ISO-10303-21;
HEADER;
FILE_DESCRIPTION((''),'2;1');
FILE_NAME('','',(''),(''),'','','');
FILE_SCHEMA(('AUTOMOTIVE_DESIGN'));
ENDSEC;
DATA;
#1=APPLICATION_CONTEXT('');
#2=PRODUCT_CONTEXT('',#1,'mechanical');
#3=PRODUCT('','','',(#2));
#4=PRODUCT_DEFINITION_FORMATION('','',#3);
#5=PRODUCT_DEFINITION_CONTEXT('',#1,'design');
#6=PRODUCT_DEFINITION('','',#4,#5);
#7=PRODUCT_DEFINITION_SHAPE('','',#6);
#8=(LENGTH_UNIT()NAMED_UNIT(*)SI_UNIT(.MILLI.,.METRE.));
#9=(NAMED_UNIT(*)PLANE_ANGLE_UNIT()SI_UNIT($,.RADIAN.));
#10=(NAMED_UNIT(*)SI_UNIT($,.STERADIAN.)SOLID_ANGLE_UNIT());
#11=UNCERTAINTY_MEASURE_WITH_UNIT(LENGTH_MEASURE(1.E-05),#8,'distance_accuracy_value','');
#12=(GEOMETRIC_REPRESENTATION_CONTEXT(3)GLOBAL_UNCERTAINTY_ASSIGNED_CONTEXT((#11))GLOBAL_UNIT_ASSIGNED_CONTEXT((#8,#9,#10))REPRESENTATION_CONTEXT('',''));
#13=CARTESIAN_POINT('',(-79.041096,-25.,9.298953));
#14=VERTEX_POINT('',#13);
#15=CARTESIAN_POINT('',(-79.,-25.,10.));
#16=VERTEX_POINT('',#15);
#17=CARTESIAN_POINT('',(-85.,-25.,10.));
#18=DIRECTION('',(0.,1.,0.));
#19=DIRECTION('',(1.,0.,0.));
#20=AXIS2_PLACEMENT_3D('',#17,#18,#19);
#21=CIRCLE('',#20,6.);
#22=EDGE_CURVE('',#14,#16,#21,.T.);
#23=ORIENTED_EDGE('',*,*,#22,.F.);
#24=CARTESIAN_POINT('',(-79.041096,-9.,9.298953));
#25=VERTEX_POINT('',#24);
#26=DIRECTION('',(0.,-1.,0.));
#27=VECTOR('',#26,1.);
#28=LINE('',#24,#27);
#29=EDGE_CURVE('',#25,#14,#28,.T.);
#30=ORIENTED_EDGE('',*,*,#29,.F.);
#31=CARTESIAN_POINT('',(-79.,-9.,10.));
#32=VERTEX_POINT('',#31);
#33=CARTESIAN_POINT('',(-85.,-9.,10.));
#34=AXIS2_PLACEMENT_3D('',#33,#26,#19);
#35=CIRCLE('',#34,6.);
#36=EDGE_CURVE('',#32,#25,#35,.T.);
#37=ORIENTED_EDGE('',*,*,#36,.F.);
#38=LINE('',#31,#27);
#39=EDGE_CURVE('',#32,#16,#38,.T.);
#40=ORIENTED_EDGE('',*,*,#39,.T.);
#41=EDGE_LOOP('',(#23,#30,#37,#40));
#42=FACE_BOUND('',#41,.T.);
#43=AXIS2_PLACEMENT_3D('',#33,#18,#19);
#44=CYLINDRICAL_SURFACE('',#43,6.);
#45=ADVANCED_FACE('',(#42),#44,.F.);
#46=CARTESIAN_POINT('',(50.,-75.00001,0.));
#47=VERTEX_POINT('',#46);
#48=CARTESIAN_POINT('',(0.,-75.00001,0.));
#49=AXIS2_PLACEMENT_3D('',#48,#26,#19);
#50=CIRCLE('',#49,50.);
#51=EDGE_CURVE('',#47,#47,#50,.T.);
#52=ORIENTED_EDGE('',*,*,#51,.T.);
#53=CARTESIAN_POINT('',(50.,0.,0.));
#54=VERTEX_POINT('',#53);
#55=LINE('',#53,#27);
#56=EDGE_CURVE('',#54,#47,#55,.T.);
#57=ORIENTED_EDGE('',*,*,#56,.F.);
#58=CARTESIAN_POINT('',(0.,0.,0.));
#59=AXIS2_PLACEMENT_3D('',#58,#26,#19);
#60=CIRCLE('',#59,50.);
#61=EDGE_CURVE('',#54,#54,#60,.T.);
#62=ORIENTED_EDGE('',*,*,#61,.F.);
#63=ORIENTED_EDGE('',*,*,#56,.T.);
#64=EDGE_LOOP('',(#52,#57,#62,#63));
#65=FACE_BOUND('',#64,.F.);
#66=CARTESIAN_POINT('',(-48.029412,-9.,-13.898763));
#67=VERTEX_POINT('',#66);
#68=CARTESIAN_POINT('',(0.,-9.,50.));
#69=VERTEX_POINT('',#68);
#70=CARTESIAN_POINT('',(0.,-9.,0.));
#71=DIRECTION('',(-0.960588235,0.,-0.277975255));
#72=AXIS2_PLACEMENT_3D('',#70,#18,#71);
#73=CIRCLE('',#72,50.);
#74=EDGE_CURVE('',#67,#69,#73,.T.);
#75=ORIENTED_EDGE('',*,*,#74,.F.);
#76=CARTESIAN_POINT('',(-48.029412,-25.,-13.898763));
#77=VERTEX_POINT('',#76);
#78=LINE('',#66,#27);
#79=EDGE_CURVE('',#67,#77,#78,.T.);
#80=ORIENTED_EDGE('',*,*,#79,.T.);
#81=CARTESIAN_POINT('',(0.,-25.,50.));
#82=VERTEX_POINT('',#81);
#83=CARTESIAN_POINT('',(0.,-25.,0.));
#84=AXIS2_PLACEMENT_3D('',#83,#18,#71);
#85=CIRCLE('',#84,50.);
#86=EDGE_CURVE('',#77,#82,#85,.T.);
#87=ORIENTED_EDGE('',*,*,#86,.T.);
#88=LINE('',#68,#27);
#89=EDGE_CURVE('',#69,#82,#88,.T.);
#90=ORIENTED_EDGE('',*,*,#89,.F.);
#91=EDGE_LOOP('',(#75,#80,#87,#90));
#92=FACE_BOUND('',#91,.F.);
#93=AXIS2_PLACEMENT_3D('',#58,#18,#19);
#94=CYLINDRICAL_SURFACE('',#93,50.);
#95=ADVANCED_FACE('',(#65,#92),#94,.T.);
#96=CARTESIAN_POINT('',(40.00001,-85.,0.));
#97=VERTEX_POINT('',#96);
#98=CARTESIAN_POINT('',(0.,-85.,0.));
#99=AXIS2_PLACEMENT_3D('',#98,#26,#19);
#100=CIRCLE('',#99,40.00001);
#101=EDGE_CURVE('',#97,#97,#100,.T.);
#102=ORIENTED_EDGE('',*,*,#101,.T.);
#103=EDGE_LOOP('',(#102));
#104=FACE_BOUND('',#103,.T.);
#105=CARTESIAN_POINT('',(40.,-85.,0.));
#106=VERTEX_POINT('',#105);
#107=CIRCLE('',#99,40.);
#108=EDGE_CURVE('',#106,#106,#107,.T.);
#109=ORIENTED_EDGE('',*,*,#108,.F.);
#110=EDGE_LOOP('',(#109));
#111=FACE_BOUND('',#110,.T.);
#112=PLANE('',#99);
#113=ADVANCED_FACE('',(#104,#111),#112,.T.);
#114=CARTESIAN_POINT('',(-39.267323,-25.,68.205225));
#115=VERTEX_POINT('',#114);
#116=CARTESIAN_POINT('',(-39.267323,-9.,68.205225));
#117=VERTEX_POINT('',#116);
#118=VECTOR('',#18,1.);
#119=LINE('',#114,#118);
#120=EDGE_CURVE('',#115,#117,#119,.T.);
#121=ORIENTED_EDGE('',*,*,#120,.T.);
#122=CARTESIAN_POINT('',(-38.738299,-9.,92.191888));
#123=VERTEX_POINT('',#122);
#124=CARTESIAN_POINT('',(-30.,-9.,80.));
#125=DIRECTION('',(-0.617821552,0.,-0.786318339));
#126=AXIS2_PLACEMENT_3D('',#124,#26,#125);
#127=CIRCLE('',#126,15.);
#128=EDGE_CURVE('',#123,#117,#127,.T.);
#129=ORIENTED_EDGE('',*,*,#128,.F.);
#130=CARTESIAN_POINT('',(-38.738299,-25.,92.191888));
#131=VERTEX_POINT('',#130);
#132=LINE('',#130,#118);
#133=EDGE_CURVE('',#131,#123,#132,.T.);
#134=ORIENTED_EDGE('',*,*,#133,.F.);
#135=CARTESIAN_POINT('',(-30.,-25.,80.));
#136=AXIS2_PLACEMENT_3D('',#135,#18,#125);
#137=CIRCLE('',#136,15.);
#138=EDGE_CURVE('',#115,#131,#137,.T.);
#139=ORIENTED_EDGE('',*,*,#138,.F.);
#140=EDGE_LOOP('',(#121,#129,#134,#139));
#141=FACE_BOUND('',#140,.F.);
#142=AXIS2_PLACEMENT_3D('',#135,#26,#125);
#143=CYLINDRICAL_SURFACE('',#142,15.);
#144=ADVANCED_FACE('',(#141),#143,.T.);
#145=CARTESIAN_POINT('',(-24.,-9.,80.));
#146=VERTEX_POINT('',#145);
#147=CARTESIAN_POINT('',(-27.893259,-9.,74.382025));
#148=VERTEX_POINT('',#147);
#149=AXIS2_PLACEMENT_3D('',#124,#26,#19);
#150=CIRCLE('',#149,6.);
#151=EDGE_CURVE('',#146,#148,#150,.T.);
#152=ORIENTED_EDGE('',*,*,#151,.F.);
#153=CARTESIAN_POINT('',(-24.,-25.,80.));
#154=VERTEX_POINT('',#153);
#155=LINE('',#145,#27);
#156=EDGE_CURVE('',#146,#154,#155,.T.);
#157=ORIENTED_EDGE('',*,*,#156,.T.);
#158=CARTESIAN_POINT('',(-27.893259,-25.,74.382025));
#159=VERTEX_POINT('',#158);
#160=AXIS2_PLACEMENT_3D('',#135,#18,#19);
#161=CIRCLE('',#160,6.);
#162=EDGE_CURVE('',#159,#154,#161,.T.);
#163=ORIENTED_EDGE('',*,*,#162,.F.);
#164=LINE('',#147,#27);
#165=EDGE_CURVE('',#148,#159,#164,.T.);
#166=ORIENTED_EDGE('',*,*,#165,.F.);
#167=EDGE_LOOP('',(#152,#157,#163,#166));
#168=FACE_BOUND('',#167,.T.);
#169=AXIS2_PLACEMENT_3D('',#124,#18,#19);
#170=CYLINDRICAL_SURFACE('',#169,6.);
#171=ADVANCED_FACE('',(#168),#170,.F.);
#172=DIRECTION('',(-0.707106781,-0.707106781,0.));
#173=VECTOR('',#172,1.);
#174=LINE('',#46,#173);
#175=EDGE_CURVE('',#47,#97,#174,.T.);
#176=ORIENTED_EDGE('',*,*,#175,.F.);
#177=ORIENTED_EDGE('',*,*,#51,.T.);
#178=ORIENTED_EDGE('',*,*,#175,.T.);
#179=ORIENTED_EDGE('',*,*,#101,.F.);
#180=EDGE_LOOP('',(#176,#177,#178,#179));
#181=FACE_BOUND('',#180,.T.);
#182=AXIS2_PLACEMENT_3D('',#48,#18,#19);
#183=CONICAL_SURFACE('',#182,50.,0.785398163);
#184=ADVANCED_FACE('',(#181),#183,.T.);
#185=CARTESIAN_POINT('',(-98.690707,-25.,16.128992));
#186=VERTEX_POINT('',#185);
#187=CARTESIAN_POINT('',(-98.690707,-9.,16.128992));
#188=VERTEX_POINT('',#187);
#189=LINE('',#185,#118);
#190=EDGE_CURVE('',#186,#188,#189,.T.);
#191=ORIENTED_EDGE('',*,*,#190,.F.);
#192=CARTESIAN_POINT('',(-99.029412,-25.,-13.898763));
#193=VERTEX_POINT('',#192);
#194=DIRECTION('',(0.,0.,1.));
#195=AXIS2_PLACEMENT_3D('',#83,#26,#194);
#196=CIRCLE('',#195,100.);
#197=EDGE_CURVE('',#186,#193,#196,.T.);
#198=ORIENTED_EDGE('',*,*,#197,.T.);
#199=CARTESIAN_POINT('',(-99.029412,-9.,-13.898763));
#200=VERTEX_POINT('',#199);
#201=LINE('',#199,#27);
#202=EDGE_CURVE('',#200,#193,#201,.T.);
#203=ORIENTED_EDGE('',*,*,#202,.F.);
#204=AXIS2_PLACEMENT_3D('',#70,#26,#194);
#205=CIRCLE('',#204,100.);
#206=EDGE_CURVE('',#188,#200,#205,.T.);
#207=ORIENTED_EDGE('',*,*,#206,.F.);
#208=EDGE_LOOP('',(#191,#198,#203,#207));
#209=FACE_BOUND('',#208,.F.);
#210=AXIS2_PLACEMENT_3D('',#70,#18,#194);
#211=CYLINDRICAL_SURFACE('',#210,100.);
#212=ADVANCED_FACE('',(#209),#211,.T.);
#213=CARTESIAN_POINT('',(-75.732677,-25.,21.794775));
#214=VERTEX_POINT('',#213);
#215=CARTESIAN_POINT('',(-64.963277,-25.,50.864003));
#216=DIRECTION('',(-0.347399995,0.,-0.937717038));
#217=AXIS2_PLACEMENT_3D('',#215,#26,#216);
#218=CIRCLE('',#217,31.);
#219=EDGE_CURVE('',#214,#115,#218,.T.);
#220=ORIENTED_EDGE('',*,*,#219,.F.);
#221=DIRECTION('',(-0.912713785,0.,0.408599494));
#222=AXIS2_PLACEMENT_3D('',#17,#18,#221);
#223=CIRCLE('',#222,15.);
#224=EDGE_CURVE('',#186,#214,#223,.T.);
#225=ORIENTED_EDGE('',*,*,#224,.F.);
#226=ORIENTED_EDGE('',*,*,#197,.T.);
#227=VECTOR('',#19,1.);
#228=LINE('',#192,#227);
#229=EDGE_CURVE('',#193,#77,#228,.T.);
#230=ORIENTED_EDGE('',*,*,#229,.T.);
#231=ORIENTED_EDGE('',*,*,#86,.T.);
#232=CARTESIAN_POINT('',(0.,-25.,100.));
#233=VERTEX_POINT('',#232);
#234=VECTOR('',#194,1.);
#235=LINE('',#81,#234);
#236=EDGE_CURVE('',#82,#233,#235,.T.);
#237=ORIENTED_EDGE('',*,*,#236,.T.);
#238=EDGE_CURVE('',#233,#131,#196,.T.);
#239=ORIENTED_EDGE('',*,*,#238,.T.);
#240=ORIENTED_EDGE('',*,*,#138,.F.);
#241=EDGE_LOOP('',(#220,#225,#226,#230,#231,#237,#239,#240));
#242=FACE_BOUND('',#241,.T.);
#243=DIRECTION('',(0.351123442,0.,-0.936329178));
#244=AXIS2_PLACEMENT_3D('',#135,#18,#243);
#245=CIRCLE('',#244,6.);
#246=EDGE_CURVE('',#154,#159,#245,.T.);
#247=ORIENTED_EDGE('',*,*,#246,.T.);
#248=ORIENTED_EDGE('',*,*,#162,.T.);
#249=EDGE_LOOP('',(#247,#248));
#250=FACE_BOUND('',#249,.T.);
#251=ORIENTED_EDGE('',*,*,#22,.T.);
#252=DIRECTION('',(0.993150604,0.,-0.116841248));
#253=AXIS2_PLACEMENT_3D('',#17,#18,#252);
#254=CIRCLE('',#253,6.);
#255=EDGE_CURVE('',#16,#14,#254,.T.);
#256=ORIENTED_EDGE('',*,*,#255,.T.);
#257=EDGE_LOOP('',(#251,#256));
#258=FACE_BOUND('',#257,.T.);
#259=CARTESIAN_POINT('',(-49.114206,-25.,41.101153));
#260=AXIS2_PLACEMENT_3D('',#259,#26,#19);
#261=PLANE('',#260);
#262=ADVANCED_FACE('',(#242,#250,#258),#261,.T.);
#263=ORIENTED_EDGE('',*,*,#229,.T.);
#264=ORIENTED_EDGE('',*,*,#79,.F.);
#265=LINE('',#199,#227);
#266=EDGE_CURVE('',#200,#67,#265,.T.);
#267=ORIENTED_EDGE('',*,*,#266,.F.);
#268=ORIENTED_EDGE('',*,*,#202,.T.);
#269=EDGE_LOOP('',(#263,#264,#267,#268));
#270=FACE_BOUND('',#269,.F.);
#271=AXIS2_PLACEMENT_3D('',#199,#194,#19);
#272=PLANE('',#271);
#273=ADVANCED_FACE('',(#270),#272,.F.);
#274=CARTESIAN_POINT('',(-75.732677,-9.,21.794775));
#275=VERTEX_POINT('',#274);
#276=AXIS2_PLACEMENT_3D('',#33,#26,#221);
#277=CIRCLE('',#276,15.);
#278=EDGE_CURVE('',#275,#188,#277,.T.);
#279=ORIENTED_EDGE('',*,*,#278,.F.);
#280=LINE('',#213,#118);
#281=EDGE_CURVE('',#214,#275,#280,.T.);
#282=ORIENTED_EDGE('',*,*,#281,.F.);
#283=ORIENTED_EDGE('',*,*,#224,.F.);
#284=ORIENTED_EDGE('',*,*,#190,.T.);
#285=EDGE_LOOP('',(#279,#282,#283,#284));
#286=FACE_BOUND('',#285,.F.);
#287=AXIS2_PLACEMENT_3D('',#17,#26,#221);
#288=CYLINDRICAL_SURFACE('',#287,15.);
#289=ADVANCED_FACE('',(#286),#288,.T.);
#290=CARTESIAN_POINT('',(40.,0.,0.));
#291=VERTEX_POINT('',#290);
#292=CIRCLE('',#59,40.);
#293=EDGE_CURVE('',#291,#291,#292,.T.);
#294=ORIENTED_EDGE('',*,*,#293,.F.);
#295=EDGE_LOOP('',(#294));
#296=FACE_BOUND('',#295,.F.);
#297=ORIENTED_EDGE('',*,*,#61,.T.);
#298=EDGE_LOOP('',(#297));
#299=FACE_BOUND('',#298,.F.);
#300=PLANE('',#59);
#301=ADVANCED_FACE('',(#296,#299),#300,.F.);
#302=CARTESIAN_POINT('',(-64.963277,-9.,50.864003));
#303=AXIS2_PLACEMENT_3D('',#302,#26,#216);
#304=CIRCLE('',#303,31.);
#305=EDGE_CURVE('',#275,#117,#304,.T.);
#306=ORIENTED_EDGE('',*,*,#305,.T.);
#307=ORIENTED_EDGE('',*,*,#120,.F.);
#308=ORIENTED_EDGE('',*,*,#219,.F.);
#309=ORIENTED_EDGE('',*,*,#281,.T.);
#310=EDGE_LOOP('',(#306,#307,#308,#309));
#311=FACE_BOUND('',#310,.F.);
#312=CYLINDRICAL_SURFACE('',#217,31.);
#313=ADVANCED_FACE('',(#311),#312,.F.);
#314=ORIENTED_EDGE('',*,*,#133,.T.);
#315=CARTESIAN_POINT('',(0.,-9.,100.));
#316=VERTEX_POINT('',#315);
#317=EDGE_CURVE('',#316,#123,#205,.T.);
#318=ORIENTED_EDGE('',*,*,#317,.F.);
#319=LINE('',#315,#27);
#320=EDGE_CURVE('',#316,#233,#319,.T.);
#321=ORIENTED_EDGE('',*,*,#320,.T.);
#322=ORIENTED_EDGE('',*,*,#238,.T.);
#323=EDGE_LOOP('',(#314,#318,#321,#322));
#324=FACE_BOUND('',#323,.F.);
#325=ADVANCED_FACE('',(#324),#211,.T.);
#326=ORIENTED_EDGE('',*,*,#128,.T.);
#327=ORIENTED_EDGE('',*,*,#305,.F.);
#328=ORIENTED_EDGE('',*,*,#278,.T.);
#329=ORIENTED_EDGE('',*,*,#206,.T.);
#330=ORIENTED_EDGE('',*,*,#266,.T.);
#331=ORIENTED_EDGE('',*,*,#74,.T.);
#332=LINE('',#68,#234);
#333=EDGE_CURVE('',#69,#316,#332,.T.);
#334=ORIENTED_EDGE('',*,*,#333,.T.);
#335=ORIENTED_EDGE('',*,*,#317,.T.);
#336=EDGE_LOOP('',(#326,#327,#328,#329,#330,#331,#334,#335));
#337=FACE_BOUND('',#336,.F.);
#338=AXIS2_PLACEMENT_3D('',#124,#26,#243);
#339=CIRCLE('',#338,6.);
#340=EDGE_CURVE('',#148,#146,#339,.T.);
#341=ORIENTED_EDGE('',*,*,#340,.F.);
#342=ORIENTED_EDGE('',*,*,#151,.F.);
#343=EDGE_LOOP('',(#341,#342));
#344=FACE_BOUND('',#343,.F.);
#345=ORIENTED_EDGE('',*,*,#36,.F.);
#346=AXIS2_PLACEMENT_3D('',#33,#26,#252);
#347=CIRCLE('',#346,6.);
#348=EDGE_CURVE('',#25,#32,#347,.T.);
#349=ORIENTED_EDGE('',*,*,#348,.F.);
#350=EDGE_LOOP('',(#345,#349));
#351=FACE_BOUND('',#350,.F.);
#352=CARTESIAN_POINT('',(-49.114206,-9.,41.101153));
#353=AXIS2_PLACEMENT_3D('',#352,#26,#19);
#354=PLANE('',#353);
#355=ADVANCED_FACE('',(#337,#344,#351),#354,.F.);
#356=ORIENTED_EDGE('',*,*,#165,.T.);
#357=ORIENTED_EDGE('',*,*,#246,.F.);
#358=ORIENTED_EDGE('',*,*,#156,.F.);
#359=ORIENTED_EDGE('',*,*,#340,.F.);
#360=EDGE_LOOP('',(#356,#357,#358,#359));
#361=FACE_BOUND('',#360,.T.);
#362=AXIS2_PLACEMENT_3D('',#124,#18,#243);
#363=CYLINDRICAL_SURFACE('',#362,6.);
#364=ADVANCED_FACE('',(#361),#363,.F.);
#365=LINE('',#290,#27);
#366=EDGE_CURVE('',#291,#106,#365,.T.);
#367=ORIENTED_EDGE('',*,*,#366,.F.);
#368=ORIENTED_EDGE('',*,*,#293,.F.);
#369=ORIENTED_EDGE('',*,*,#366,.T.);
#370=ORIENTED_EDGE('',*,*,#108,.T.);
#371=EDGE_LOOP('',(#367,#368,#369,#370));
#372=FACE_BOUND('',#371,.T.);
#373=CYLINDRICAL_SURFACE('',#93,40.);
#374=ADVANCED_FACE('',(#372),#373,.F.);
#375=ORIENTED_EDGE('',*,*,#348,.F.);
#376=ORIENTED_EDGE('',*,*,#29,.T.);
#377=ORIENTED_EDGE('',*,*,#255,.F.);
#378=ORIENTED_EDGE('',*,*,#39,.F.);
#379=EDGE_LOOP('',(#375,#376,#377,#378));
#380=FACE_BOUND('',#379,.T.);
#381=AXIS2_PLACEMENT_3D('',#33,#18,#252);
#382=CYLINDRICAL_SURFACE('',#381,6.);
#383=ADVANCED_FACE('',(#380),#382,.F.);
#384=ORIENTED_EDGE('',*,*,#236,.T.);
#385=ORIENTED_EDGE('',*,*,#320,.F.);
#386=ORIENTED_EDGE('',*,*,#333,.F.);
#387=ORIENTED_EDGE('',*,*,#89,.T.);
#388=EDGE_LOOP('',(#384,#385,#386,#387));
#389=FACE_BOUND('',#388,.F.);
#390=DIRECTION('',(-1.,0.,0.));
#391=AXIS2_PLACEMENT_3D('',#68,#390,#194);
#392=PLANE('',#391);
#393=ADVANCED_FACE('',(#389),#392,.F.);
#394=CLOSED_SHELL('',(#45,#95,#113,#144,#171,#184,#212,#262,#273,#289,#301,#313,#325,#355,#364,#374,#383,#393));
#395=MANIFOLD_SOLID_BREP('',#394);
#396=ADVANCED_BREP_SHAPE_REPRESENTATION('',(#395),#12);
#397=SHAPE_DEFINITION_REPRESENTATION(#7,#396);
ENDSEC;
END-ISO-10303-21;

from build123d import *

# Parameters (mm, degrees)
F0_R     = 50
F0_R_2   = 40
F1_DEPTH = 85
F4_DEPTH = 16
F6_DEPTH = 18
F8_DEPTH = 17
F9_SIZE  = 9.99999


# Not quite as in the source:
# - a fillet or chamfer is up to 0.001 mm smaller than in the source, because OpenCascade refuses the exact size
# - a feature names something its author has since deleted; it is built from what else it names


with BuildPart() as f1:
    # F0 (on Front) → F1 (new body)
    with BuildSketch(Plane.XZ):
        Circle(F0_R)
        Circle(F0_R_2, mode=Mode.SUBTRACT)
    extrude(amount=F1_DEPTH)

    # F3 (on offset) → F4 (join)
    with BuildSketch(Plane.XZ.offset(9)):
        with BuildLine():
            ThreePointArc((-48.0294117647, -13.898762734), (-39.9683508335, 30.0421525802), (0, 50))
            Line((0, 50), (0, 100))
            ThreePointArc((0, 100), (-75.4648138983, 65.6129702368), (-99.0294117647, -13.898762734))
            Line((-99.0294117647, -13.898762734), (-48.0294117647, -13.898762734))
        make_face()
    extrude(amount=F4_DEPTH)

    # F5 (on offset) → F6 (cut)
    with BuildSketch(Plane.XZ.offset(9)):
        with BuildLine():
            ThreePointArc((-24, 80), (-34.9315537053, 83.4175690266), (-27.8932593505, 74.3820249346))
            ThreePointArc((-27.8932593505, 74.3820249346), (-25.0684462947, 76.5824309734), (-24, 80))
        make_face()
        with BuildLine():
            ThreePointArc((-79, 10), (-90.989717095, 10.3511255077), (-79.0410963741, 9.2989525146))
            ThreePointArc((-79.0410963741, 9.2989525146), (-79.010282905, 9.6488744923), (-79, 10))
        make_face()
    extrude(amount=F6_DEPTH, mode=Mode.SUBTRACT)

    # F7 (on face) → F8 (cut)
    with BuildSketch(Plane.XZ.offset(25)):
        with BuildLine():
            ThreePointArc((-75.732676721, 21.7947750823), (-40.5874083787, 31.7115351547), (-39.267323279, 68.2052249177))
            ThreePointArc((-39.267323279, 68.2052249177), (-44.9963531804, 80.3307435394), (-38.7382990756, 92.1918878466))
            ThreePointArc((-38.7382990756, 92.1918878466), (-78.5370863203, 61.9025530355), (-98.6907067749, 16.1289924134))
            ThreePointArc((-98.6907067749, 16.1289924134), (-88.5940024625, 24.5630747543), (-75.732676721, 21.7947750823))
        make_face()
    extrude(amount=-F8_DEPTH, mode=Mode.SUBTRACT)

    # F9 (size 10 in the source; OpenCascade refuses exactly that, so slightly less here)
    f9_edges = [f1.edges().sort_by_distance(p)[0] for p in [
        (-50, -85, 0),
    ]]
    chamfer(f9_edges, length=F9_SIZE)


solid = f1.part
